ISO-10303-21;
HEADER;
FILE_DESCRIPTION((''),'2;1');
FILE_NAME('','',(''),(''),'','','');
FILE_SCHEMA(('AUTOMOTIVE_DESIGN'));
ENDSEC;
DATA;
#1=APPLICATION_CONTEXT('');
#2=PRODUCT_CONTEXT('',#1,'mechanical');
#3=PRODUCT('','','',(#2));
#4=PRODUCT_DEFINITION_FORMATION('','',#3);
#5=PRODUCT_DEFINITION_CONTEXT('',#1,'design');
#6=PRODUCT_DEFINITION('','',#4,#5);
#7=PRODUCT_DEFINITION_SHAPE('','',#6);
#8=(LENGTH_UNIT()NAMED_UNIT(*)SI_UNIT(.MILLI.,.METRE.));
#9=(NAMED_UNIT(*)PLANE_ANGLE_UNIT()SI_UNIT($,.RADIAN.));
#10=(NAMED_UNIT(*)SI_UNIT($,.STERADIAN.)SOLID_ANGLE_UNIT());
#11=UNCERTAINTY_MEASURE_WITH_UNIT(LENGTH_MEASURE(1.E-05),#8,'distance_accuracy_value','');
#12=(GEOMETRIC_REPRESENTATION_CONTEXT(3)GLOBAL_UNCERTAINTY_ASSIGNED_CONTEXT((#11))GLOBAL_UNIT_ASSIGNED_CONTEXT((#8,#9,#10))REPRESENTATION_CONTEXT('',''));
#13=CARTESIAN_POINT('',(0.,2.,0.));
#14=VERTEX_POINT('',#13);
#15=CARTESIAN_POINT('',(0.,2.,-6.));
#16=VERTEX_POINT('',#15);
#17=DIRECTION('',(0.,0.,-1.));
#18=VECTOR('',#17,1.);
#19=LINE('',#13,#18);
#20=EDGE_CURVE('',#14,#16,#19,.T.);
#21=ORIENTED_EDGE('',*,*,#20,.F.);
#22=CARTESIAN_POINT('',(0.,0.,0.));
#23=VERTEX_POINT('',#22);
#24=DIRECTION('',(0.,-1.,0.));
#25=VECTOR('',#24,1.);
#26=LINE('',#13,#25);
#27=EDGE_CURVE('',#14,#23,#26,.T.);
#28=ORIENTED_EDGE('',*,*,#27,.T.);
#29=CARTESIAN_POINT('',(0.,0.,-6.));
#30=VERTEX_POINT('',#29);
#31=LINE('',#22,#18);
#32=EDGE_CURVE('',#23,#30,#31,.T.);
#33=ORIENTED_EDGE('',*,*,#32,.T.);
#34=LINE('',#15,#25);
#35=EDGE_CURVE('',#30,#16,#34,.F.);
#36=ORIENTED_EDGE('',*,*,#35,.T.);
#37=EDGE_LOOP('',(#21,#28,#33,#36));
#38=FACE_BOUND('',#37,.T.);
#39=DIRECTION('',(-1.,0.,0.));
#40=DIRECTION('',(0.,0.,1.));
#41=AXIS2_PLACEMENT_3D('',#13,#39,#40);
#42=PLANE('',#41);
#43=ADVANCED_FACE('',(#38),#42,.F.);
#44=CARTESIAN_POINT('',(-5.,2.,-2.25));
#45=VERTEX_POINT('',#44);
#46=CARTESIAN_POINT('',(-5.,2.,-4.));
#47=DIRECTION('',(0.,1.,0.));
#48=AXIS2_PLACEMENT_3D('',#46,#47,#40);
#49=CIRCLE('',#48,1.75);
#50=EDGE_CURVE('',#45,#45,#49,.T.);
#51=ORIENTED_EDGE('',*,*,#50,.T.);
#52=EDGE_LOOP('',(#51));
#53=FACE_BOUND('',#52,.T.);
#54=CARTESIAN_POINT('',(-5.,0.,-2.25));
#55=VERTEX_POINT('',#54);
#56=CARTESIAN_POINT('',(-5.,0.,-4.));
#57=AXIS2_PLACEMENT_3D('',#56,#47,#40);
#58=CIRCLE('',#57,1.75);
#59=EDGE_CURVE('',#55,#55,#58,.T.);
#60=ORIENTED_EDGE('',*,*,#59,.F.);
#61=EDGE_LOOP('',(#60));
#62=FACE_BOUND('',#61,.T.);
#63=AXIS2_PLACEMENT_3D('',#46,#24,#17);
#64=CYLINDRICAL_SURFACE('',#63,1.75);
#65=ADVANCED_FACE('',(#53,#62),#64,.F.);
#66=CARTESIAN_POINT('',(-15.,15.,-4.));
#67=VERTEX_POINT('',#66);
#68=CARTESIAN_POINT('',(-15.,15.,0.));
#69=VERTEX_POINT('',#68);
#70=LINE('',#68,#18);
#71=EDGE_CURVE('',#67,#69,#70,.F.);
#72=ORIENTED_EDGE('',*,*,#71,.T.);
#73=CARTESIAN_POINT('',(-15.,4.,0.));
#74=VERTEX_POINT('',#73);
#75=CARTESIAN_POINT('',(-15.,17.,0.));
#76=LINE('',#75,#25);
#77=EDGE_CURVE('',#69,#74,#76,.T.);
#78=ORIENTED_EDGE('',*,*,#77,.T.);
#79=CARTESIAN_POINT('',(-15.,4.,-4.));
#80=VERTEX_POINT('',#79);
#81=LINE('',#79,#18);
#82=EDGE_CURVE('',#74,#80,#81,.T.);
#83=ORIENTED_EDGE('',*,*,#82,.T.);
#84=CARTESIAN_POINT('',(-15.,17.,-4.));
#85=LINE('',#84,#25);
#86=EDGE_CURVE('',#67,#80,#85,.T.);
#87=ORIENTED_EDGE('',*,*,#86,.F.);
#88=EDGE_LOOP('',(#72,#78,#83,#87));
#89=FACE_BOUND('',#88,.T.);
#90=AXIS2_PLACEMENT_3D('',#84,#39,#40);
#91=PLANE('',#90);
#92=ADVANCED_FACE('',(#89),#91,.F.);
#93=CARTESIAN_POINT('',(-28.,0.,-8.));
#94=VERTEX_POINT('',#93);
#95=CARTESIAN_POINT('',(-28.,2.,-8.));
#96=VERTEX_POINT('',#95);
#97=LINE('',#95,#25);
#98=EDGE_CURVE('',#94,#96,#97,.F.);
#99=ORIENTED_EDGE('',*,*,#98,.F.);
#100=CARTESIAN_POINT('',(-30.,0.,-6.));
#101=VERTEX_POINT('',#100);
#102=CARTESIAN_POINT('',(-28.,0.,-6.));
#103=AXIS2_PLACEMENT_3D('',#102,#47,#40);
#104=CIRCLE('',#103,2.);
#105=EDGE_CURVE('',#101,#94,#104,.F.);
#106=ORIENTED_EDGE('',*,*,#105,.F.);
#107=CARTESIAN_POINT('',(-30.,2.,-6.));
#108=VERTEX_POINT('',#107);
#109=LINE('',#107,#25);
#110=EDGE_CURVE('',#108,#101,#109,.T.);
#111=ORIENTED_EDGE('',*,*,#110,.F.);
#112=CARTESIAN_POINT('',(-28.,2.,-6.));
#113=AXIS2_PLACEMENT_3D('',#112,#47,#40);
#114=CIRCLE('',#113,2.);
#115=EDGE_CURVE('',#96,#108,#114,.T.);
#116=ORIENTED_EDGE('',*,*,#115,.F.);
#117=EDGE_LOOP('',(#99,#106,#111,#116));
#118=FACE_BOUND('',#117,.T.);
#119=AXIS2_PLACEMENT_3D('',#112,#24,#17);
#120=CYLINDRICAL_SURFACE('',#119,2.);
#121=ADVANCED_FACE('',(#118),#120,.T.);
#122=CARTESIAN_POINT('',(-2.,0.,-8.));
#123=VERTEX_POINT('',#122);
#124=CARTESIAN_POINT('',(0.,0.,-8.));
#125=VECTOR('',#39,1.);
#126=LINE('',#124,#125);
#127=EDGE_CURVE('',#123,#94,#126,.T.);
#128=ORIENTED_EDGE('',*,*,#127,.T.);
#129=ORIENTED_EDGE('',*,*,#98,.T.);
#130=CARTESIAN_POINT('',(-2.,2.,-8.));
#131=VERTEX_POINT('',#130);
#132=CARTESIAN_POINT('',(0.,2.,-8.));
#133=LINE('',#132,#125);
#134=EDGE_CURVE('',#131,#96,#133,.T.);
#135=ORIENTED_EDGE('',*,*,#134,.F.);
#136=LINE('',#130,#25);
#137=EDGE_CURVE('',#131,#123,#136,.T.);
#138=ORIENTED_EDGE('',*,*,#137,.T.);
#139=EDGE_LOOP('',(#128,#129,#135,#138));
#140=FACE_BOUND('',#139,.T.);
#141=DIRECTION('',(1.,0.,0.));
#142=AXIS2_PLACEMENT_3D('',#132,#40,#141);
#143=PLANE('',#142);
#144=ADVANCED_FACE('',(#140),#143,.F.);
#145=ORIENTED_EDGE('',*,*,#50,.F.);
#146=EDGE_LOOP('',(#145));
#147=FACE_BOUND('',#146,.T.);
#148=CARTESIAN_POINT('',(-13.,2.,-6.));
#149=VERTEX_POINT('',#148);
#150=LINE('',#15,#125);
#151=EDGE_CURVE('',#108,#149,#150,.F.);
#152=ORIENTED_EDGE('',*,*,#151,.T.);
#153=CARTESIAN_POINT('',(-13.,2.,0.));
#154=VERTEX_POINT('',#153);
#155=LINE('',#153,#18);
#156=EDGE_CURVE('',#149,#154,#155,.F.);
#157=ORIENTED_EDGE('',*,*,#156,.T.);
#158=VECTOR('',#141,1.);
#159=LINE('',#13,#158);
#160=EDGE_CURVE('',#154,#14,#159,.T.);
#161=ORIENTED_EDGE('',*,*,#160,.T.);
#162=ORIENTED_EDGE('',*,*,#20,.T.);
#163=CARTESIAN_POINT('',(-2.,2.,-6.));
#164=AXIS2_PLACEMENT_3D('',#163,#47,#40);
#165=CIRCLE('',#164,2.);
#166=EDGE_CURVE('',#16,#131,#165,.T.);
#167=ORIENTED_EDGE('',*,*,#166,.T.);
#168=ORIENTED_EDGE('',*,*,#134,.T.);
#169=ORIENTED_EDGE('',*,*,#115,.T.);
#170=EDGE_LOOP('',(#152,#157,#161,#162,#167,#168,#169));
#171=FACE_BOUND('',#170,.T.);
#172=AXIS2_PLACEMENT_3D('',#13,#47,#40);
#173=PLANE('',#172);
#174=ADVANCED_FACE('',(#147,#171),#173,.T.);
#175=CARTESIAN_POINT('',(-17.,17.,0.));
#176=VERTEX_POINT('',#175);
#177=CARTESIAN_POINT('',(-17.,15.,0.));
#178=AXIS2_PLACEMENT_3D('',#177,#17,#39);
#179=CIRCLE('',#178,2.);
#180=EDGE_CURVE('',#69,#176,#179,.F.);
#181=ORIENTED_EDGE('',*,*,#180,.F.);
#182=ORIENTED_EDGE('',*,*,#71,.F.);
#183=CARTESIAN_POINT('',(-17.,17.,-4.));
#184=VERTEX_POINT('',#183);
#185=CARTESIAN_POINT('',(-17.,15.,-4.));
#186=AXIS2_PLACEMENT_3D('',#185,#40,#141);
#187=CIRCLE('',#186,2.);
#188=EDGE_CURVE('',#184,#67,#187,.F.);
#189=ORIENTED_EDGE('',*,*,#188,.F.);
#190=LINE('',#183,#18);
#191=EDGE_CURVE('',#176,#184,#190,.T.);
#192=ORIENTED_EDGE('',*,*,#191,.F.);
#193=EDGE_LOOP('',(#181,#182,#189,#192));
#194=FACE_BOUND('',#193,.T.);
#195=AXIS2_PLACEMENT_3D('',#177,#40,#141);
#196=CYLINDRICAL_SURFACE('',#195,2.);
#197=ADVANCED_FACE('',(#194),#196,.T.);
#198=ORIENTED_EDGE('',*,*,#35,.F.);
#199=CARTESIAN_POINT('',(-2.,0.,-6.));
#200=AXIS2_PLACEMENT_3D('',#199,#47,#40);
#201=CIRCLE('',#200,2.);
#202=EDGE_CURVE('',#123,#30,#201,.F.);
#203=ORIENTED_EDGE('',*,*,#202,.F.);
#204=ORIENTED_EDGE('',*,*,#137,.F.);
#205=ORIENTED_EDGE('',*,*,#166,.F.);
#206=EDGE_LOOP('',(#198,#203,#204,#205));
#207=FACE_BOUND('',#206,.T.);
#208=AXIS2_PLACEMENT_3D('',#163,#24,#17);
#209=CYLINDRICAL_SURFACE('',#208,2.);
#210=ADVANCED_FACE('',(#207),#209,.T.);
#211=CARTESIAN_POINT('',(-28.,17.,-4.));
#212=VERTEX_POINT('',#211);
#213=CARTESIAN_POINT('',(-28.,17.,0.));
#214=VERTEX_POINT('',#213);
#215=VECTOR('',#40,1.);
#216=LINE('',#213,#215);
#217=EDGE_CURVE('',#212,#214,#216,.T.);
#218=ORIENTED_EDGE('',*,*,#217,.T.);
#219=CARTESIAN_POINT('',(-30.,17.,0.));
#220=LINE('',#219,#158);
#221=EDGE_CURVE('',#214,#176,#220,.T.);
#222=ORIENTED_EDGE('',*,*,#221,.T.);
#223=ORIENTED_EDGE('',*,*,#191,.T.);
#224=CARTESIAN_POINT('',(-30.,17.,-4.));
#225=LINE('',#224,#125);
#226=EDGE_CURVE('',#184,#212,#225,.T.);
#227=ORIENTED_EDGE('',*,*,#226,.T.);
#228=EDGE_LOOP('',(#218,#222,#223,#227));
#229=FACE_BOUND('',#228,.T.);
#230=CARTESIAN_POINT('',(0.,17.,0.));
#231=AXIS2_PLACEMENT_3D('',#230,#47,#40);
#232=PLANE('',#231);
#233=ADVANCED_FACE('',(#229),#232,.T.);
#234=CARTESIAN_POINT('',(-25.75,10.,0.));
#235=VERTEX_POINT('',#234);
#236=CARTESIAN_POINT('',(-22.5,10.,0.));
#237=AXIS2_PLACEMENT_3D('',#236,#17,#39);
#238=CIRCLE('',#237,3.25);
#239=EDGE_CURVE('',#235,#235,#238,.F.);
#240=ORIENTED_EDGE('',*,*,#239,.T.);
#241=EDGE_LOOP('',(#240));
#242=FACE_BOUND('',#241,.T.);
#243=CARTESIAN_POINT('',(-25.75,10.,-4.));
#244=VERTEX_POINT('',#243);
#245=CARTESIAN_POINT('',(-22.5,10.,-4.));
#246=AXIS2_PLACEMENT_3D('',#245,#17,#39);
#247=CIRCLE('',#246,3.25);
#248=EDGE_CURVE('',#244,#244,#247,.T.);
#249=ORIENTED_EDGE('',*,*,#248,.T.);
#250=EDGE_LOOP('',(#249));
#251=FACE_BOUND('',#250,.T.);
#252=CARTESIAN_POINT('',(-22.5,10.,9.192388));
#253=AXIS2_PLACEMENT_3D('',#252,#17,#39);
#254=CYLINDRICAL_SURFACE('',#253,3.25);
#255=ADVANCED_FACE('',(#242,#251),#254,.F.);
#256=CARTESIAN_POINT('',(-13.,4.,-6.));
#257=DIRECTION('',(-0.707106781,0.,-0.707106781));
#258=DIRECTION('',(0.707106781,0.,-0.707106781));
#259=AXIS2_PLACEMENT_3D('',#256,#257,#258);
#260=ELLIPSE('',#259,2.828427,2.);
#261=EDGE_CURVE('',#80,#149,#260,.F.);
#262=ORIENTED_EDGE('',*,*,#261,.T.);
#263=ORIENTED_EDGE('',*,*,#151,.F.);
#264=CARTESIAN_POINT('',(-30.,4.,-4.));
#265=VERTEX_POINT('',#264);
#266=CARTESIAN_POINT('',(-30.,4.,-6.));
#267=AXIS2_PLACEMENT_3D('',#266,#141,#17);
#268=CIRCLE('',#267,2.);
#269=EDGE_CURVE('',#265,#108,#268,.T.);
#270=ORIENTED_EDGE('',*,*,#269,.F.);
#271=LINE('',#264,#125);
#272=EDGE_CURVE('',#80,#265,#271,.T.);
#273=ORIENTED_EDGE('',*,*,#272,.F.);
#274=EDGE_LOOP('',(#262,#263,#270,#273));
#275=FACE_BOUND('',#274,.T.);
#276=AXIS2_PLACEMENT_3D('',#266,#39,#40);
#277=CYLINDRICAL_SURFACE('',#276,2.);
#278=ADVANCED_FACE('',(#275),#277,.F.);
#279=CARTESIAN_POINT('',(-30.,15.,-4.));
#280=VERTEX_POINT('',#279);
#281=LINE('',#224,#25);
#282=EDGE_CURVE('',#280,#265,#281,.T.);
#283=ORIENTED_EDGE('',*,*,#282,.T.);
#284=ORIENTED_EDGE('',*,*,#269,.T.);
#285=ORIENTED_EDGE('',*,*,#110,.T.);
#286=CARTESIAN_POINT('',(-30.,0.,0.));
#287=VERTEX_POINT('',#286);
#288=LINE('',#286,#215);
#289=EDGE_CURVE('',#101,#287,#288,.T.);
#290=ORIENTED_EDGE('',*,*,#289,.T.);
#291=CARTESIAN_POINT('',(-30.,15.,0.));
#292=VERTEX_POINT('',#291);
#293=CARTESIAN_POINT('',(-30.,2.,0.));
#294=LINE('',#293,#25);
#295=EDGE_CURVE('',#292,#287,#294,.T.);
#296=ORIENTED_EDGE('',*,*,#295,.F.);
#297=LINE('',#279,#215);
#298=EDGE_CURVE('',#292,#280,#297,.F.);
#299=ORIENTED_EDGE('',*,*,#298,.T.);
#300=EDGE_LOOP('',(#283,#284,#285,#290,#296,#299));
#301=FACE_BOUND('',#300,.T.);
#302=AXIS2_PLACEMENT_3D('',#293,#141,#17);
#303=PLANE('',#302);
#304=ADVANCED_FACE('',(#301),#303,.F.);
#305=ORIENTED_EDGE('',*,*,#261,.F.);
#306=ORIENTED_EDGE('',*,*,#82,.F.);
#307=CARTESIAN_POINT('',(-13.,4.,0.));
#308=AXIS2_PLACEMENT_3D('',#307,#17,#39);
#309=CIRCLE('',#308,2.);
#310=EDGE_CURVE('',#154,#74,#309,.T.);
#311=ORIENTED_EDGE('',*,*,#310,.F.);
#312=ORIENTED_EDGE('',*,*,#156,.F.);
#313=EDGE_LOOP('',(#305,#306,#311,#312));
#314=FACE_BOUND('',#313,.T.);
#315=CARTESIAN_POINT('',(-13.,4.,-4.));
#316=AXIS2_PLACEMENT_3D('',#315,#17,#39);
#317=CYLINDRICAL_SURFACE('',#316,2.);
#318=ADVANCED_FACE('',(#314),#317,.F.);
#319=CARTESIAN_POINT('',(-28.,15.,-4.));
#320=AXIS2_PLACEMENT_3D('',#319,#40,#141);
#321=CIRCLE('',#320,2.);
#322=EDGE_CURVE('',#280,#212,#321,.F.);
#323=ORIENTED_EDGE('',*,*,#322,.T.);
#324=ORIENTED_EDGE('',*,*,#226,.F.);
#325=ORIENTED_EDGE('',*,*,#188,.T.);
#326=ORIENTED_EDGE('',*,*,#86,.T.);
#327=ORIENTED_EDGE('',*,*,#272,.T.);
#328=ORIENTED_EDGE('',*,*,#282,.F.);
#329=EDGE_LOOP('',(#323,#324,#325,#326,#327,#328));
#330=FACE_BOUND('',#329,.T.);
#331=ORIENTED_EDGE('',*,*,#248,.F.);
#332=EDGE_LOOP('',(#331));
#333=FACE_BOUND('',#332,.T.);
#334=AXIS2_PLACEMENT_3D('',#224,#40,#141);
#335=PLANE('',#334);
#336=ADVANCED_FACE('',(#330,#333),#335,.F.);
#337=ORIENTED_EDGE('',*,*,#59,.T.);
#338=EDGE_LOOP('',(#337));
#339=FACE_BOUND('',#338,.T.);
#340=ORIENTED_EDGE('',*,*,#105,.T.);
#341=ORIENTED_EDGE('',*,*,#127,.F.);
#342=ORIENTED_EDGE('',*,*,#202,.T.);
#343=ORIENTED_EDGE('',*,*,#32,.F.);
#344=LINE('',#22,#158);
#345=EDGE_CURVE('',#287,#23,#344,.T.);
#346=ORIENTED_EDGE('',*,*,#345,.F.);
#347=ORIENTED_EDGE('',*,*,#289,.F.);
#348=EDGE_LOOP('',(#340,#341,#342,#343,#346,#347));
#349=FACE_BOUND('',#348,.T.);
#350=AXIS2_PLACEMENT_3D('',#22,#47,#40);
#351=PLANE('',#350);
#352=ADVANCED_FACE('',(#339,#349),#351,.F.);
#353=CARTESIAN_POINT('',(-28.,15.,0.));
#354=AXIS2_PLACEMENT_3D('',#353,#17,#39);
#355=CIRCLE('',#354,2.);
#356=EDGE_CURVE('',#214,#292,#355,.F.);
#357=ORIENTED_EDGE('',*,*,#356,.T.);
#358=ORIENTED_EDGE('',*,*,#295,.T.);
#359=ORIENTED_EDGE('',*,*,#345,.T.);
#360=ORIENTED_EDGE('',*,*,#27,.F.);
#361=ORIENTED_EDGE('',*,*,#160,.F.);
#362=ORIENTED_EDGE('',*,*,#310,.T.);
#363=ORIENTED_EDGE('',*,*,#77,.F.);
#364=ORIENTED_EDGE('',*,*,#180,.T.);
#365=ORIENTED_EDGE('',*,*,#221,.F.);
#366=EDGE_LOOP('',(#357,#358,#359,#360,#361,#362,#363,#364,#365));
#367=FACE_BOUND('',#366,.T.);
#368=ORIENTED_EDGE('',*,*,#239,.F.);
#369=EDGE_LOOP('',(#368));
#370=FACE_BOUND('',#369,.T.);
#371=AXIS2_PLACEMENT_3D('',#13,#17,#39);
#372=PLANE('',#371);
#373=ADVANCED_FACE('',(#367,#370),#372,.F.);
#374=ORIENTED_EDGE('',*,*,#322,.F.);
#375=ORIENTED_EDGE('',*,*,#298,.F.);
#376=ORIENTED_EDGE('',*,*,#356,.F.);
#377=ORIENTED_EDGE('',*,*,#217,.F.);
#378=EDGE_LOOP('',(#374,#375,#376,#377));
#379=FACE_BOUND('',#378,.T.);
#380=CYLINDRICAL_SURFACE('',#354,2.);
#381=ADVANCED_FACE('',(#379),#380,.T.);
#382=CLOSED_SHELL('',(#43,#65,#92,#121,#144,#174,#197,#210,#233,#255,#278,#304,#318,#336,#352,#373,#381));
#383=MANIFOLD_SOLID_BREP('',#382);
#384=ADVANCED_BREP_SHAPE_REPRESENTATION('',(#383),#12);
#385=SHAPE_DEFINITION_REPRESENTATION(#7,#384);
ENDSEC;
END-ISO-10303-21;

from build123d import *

# Parameters (mm, degrees)
CROQUIS1_W              = 30
CROQUIS1_H              = 8
CROQUIS1_R              = 1.75
SALIENTE_EXTRUIR1_DEPTH = 2
CROQUIS2_W              = 15
CROQUIS2_H              = 4
SALIENTE_EXTRUIR2_DEPTH = 15
CROQUIS3_R              = 3.25
CORTAR_EXTRUIR1_DEPTH   = 4
REDONDEO1_R             = 2


with BuildPart() as part:
    # Croquis1 → Saliente-Extruir1 (new body)
    with BuildSketch(Plane(origin=(0, 0, 0), x_dir=(1, 0, 0), z_dir=(0, 1, 0))):
        with Locations((-15, 4)):
            Rectangle(CROQUIS1_W, CROQUIS1_H)
        with Locations(Location((-5, 4, 0), (0, 0, 270))):
            Circle(CROQUIS1_R, mode=Mode.SUBTRACT)
    extrude(amount=SALIENTE_EXTRUIR1_DEPTH)

    # Croquis2 → Saliente-Extruir2 (add)
    with BuildSketch(Plane(origin=(0, 2, 0), x_dir=(1, 0, 0), z_dir=(0, 1, 0))):
        with Locations((-22.5, 2)):
            Rectangle(CROQUIS2_W, CROQUIS2_H)
    extrude(amount=SALIENTE_EXTRUIR2_DEPTH)

    # Croquis3 → Cortar-Extruir1 (cut)
    with BuildSketch(Plane(origin=(0, 0, -4), x_dir=(-1, 0, 0), z_dir=(0, 0, -1))):
        with Locations((22.5, 10)):
            Circle(CROQUIS3_R)
    extrude(amount=-CORTAR_EXTRUIR1_DEPTH, mode=Mode.SUBTRACT)

    # Redondeo1
    redondeo1_edges = [part.edges().sort_by_distance(p)[0] for p in [
        (0, 1, -8),
        (-30, 1, -8),
        (-30, 17, -2),
        (-15, 17, -2),
        (-22.5, 2, -4),
        (-15, 2, -2),
    ]]
    fillet(redondeo1_edges, radius=REDONDEO1_R - 0.0001)  # a hair under: the kernel refuses the full size


solid = part.part
